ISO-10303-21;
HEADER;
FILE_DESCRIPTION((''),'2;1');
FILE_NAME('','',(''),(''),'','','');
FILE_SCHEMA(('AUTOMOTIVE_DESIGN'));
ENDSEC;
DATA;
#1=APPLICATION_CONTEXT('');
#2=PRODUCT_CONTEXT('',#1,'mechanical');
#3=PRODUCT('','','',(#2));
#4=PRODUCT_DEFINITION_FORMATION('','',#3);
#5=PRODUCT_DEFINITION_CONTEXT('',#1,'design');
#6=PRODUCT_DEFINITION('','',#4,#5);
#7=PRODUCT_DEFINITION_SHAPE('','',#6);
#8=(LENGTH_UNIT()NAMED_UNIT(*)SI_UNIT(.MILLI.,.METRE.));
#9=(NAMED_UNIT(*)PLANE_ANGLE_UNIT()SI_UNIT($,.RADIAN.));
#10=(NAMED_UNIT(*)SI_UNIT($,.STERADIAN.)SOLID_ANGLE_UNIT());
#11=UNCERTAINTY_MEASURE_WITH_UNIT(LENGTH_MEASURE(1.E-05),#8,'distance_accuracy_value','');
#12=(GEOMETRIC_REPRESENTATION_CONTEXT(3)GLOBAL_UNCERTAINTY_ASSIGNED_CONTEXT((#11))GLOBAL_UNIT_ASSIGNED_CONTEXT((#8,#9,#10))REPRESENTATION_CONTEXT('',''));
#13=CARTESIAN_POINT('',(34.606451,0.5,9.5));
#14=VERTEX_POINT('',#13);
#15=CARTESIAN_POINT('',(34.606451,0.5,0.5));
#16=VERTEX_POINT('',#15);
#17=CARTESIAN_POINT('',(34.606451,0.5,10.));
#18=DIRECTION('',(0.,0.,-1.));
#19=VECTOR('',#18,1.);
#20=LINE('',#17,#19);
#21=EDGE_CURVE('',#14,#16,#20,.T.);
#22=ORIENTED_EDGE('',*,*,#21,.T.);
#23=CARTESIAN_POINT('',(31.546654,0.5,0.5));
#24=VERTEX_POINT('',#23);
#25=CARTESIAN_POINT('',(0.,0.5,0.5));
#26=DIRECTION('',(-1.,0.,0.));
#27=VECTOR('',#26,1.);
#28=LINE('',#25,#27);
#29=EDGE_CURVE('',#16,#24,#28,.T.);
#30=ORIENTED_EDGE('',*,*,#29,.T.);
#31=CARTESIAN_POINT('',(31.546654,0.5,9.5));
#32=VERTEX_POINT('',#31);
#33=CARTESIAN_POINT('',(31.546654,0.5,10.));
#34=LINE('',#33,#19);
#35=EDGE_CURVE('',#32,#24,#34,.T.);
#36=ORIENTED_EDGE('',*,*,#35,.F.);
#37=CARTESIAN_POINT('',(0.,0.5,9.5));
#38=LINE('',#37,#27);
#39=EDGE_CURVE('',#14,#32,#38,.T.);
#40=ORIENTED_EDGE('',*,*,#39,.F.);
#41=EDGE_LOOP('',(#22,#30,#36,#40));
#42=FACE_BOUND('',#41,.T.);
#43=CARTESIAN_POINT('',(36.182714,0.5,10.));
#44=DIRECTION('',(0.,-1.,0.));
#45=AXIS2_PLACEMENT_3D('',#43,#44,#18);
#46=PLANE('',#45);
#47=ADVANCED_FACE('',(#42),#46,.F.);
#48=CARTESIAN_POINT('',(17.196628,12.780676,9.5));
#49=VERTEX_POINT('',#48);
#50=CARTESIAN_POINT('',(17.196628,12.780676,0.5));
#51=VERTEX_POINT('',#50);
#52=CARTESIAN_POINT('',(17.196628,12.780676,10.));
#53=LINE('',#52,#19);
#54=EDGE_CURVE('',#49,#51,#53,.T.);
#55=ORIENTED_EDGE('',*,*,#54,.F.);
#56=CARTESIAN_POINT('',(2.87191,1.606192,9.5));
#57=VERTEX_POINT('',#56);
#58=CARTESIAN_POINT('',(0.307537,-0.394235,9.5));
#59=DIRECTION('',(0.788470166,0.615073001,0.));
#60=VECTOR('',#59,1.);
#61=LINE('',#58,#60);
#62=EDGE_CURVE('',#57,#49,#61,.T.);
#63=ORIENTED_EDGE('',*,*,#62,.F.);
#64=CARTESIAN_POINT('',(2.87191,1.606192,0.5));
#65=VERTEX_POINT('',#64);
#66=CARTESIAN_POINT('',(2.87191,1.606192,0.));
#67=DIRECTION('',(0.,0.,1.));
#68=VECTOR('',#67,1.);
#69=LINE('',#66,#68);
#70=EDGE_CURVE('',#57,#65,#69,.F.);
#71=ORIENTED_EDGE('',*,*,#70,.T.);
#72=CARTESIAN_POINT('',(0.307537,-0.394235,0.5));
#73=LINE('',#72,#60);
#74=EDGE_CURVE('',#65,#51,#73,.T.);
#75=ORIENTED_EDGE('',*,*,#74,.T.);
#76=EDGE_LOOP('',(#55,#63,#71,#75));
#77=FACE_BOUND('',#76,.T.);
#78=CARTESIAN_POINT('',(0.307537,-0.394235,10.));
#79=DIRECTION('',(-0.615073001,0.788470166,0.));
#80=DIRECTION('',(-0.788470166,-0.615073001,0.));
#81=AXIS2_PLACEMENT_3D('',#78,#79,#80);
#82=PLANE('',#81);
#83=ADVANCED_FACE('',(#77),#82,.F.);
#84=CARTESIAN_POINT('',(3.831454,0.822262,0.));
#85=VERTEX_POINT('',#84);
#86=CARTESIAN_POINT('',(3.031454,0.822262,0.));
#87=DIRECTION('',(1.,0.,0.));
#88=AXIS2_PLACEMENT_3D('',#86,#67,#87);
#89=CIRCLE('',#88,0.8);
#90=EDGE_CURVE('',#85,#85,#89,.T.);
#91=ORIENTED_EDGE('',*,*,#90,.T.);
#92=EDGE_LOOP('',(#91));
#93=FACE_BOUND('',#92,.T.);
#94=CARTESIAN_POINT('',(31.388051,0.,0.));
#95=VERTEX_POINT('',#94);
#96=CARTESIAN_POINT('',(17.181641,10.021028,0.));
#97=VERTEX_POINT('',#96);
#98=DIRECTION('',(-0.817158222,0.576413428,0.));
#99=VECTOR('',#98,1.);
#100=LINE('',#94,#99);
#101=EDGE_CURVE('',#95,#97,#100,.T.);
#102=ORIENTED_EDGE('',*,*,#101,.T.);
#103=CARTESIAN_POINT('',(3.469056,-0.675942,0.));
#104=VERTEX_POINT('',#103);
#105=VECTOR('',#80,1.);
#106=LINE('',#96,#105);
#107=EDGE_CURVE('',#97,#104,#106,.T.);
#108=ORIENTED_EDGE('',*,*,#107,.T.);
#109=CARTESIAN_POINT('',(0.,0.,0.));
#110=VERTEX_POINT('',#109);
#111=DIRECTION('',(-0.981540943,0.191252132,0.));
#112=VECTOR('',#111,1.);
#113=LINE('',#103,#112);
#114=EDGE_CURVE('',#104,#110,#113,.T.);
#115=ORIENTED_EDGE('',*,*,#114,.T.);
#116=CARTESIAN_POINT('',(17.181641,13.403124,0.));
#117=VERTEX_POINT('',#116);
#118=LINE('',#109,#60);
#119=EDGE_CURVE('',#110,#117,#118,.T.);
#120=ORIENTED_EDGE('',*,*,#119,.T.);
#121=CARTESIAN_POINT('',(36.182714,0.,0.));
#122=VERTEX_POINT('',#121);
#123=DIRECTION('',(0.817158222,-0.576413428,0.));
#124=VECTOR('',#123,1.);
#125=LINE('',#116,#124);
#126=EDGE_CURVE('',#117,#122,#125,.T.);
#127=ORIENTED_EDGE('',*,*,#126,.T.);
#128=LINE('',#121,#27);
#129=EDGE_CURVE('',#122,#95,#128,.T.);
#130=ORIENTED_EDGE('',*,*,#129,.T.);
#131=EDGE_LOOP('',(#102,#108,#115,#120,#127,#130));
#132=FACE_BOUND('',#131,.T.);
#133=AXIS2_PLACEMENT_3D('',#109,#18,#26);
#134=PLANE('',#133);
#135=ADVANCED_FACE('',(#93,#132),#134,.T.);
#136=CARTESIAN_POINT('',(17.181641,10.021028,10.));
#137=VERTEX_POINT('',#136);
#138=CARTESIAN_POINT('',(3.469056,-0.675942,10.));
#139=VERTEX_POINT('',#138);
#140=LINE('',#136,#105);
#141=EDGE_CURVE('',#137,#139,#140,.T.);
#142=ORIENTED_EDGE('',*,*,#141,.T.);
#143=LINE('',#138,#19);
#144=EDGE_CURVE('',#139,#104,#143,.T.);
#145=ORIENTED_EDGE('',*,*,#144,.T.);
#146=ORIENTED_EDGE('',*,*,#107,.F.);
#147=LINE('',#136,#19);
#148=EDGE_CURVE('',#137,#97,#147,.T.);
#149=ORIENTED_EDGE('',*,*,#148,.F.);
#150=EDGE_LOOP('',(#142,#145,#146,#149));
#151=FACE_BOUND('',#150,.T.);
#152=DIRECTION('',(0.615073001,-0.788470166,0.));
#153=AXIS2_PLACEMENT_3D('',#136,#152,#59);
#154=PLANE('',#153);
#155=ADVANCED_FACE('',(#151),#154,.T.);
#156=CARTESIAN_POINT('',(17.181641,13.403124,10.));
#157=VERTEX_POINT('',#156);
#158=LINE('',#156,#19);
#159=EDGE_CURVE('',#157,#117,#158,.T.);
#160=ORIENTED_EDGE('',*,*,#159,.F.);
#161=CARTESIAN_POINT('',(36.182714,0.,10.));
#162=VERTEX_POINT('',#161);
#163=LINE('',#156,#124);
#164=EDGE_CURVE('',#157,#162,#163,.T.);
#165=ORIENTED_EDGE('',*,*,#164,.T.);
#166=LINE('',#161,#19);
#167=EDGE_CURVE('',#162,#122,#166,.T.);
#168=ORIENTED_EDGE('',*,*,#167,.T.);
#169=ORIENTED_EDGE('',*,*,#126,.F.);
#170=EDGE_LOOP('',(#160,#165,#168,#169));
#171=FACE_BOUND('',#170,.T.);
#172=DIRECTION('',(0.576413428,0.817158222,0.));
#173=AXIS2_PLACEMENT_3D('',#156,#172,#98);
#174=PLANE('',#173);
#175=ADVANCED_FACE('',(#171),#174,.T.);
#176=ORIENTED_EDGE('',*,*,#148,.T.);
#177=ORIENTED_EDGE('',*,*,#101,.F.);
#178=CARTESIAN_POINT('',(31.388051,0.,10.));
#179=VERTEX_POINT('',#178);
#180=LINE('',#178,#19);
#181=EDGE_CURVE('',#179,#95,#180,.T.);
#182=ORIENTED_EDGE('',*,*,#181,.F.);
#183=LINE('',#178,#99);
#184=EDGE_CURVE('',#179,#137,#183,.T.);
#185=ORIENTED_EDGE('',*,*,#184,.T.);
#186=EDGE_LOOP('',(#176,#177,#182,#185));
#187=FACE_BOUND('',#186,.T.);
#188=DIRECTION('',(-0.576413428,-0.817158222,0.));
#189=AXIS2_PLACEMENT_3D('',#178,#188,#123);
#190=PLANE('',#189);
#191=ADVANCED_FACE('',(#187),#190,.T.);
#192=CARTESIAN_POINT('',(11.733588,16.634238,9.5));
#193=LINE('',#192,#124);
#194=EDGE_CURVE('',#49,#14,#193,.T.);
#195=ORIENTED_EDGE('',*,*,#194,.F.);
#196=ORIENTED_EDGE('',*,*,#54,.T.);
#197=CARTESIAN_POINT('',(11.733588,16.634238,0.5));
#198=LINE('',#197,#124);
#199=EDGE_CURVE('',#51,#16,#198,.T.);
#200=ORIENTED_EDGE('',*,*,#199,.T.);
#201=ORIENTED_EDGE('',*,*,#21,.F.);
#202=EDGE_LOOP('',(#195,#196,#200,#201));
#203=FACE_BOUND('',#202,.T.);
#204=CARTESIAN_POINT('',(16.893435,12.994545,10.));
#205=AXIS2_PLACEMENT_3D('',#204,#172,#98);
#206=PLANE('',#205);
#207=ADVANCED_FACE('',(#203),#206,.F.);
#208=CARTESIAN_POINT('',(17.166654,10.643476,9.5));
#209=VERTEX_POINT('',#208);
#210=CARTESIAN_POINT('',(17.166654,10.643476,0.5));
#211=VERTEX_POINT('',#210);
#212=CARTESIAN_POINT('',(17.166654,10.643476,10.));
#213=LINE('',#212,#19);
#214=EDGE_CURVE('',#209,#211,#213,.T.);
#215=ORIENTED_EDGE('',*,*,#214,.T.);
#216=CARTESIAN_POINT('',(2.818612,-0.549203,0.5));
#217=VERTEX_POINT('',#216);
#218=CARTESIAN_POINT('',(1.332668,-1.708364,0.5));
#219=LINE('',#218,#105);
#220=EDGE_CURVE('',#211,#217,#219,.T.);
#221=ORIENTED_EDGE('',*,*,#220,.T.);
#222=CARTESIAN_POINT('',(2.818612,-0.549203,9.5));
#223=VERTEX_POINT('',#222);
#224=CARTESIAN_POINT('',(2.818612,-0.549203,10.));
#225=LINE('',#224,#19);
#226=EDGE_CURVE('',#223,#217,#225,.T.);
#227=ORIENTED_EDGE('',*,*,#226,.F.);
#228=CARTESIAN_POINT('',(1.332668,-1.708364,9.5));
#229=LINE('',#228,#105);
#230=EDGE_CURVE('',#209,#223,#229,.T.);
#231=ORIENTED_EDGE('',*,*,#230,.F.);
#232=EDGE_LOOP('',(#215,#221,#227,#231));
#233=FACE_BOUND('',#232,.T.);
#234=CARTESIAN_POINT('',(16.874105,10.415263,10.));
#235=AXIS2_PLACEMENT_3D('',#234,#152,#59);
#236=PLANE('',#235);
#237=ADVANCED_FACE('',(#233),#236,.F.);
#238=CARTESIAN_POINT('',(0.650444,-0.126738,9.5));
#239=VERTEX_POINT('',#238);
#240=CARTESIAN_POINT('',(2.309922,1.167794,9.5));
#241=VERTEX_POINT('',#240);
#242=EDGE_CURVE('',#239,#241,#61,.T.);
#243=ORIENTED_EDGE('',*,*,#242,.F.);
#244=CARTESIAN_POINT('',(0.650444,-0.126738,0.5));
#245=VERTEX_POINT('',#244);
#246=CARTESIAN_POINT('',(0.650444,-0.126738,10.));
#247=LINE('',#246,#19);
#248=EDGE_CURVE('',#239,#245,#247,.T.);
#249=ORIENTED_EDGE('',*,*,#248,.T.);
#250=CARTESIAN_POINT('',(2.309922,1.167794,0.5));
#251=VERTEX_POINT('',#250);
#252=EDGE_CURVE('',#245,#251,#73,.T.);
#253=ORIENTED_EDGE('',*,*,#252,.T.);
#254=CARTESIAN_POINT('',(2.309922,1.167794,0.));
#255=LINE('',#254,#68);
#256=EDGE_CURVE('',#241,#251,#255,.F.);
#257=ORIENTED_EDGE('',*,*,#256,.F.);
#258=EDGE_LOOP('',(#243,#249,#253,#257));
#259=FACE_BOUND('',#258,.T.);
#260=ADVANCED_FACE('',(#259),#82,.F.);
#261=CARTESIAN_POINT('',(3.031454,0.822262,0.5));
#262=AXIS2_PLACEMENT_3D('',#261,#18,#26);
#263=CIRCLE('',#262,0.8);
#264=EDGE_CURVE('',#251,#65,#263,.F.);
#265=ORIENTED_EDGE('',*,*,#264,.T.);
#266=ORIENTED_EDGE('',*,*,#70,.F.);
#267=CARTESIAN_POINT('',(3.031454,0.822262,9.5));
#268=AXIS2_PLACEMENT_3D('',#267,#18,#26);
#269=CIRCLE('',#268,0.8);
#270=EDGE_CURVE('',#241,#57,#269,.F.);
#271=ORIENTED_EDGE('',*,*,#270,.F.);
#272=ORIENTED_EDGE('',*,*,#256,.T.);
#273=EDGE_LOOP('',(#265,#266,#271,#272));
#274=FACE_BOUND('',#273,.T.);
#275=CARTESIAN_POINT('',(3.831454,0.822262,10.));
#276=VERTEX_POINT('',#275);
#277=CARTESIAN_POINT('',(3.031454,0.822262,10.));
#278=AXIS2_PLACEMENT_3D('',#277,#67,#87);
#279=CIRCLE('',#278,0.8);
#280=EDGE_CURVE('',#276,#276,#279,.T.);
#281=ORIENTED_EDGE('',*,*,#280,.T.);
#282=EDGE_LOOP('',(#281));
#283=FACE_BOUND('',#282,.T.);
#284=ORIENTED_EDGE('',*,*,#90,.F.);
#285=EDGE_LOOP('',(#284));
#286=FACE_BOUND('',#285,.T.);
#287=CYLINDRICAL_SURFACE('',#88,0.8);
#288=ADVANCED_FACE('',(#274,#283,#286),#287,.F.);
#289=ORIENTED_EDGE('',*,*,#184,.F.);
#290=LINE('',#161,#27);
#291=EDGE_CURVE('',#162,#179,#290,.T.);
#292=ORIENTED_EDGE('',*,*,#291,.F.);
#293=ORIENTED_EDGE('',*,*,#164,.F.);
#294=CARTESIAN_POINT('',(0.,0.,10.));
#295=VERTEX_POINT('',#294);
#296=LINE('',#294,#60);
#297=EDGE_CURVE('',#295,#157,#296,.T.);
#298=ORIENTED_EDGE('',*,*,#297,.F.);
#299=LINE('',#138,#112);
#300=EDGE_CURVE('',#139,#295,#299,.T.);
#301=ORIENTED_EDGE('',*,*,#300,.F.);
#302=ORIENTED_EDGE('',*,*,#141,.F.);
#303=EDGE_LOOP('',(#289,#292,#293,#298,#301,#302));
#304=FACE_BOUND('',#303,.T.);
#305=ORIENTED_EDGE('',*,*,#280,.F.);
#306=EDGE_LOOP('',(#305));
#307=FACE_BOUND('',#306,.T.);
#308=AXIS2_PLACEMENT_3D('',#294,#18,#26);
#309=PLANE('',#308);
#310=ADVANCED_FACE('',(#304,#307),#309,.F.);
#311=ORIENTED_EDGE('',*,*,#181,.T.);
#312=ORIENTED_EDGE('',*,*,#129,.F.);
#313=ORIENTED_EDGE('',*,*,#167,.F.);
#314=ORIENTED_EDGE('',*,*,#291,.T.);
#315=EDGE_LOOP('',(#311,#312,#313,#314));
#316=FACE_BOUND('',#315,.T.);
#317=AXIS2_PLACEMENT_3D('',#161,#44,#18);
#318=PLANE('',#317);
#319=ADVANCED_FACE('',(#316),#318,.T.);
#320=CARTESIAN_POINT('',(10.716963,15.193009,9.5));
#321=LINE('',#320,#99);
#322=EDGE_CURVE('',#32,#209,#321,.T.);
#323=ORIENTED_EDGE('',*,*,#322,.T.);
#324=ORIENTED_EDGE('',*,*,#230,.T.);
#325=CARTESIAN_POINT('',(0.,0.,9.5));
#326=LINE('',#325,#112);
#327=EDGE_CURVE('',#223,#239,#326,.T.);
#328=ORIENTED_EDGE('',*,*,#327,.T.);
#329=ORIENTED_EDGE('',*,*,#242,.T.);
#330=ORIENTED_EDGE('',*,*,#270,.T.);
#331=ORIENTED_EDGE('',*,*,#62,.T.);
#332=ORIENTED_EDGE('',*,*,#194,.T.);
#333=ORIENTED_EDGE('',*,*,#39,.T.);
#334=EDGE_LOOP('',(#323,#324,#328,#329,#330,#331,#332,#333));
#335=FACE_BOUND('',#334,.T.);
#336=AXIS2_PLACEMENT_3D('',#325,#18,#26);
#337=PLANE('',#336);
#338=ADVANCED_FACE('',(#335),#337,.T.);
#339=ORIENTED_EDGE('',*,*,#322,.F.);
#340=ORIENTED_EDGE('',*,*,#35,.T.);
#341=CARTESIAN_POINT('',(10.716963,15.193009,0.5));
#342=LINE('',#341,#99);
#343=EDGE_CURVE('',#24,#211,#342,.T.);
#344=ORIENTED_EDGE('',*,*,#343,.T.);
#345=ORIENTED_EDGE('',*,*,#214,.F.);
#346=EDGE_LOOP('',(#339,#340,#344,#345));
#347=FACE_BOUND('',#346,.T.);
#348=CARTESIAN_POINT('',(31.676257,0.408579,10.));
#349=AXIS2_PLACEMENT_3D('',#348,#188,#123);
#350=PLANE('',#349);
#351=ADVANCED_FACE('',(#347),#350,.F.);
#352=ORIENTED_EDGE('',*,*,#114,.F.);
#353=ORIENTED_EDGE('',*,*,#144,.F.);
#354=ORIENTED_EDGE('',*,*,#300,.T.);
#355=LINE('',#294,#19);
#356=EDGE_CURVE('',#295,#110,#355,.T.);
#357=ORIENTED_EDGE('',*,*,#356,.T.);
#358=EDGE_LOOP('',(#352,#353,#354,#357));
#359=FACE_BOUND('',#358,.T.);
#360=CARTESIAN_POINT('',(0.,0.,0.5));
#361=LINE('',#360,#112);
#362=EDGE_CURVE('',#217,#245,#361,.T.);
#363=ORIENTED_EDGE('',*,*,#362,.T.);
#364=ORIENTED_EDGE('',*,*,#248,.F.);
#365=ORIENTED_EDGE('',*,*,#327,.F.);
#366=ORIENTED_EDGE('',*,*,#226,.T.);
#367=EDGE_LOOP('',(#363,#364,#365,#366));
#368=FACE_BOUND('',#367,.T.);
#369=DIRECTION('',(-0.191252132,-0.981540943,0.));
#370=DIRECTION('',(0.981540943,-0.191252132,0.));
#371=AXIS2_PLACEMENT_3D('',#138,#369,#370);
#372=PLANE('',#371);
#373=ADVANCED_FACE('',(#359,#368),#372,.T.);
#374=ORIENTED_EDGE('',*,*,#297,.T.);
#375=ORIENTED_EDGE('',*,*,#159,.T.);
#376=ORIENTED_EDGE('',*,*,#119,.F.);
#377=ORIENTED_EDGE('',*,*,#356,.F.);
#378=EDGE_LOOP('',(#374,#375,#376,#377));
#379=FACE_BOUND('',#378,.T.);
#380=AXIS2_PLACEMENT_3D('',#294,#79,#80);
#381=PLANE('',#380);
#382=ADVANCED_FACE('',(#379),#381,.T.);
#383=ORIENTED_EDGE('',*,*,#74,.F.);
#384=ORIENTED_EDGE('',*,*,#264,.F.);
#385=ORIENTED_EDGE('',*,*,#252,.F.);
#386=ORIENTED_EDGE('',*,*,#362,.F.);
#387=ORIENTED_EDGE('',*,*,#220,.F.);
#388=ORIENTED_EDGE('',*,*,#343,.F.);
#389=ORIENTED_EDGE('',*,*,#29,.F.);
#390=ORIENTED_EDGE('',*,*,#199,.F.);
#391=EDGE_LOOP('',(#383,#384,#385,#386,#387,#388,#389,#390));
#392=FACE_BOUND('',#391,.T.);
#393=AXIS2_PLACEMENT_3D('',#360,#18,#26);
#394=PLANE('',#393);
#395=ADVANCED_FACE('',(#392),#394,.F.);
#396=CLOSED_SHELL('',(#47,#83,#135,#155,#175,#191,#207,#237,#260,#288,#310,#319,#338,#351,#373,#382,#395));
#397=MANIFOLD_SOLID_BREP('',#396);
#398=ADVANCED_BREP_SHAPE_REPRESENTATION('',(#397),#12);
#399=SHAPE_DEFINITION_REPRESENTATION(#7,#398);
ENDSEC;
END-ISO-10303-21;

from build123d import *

# Parameters (mm, degrees)
BOSS_EXTRUDE1_DEPTH = 10
SKETCH3_R           = 0.8
CUT_EXTRUDE1_DEPTH  = 10
SHELL3_START        = 0.5
SHELL3_DEPTH        = 9


# Read off the part's stored shape, not the designer's step: Shell3
with BuildPart() as part:
    # Sketch1 → Boss-Extrude1 (new body)
    with BuildSketch(Plane.XY):
        Polygon((0, 0), (17.18164136, 13.403124393), (36.182713788, 0), (31.388050652, 0), (17.18164136, 10.021027584), (3.469055949, -0.675941592), align=None)
    extrude(amount=BOSS_EXTRUDE1_DEPTH)

    # Sketch3 → Cut-Extrude1 (cut)
    with BuildSketch(Plane.XY.offset(10)):
        with Locations((3.03145353, 0.822261973)):
            Circle(SKETCH3_R)
    extrude(amount=-CUT_EXTRUDE1_DEPTH, mode=Mode.SUBTRACT)

    # Shell3 outline → Shell3 (cut)
    with BuildSketch(Plane.XY.offset(SHELL3_START)):
        with BuildLine():
            ThreePointArc((2.871909903, 1.606191709), (3.523511931, 0.19148584), (2.309922075, 1.167793967))
            Line((2.309922075, 1.167793967), (0.650444145, -0.126738299))
            Line((0.650444145, -0.126738299), (2.818611804, -0.549203293))
            Line((2.818611804, -0.549203293), (17.16665434, 10.643475851))
            Line((17.16665434, 10.643475851), (31.546653635, 0.5))
            Line((31.546653635, 0.5), (34.606450873, 0.5))
            Line((34.606450873, 0.5), (17.196628379, 12.780676126))
            Line((17.196628379, 12.780676126), (2.871909903, 1.606191709))
        make_face()
    extrude(amount=SHELL3_DEPTH, mode=Mode.SUBTRACT)


solid = part.part
